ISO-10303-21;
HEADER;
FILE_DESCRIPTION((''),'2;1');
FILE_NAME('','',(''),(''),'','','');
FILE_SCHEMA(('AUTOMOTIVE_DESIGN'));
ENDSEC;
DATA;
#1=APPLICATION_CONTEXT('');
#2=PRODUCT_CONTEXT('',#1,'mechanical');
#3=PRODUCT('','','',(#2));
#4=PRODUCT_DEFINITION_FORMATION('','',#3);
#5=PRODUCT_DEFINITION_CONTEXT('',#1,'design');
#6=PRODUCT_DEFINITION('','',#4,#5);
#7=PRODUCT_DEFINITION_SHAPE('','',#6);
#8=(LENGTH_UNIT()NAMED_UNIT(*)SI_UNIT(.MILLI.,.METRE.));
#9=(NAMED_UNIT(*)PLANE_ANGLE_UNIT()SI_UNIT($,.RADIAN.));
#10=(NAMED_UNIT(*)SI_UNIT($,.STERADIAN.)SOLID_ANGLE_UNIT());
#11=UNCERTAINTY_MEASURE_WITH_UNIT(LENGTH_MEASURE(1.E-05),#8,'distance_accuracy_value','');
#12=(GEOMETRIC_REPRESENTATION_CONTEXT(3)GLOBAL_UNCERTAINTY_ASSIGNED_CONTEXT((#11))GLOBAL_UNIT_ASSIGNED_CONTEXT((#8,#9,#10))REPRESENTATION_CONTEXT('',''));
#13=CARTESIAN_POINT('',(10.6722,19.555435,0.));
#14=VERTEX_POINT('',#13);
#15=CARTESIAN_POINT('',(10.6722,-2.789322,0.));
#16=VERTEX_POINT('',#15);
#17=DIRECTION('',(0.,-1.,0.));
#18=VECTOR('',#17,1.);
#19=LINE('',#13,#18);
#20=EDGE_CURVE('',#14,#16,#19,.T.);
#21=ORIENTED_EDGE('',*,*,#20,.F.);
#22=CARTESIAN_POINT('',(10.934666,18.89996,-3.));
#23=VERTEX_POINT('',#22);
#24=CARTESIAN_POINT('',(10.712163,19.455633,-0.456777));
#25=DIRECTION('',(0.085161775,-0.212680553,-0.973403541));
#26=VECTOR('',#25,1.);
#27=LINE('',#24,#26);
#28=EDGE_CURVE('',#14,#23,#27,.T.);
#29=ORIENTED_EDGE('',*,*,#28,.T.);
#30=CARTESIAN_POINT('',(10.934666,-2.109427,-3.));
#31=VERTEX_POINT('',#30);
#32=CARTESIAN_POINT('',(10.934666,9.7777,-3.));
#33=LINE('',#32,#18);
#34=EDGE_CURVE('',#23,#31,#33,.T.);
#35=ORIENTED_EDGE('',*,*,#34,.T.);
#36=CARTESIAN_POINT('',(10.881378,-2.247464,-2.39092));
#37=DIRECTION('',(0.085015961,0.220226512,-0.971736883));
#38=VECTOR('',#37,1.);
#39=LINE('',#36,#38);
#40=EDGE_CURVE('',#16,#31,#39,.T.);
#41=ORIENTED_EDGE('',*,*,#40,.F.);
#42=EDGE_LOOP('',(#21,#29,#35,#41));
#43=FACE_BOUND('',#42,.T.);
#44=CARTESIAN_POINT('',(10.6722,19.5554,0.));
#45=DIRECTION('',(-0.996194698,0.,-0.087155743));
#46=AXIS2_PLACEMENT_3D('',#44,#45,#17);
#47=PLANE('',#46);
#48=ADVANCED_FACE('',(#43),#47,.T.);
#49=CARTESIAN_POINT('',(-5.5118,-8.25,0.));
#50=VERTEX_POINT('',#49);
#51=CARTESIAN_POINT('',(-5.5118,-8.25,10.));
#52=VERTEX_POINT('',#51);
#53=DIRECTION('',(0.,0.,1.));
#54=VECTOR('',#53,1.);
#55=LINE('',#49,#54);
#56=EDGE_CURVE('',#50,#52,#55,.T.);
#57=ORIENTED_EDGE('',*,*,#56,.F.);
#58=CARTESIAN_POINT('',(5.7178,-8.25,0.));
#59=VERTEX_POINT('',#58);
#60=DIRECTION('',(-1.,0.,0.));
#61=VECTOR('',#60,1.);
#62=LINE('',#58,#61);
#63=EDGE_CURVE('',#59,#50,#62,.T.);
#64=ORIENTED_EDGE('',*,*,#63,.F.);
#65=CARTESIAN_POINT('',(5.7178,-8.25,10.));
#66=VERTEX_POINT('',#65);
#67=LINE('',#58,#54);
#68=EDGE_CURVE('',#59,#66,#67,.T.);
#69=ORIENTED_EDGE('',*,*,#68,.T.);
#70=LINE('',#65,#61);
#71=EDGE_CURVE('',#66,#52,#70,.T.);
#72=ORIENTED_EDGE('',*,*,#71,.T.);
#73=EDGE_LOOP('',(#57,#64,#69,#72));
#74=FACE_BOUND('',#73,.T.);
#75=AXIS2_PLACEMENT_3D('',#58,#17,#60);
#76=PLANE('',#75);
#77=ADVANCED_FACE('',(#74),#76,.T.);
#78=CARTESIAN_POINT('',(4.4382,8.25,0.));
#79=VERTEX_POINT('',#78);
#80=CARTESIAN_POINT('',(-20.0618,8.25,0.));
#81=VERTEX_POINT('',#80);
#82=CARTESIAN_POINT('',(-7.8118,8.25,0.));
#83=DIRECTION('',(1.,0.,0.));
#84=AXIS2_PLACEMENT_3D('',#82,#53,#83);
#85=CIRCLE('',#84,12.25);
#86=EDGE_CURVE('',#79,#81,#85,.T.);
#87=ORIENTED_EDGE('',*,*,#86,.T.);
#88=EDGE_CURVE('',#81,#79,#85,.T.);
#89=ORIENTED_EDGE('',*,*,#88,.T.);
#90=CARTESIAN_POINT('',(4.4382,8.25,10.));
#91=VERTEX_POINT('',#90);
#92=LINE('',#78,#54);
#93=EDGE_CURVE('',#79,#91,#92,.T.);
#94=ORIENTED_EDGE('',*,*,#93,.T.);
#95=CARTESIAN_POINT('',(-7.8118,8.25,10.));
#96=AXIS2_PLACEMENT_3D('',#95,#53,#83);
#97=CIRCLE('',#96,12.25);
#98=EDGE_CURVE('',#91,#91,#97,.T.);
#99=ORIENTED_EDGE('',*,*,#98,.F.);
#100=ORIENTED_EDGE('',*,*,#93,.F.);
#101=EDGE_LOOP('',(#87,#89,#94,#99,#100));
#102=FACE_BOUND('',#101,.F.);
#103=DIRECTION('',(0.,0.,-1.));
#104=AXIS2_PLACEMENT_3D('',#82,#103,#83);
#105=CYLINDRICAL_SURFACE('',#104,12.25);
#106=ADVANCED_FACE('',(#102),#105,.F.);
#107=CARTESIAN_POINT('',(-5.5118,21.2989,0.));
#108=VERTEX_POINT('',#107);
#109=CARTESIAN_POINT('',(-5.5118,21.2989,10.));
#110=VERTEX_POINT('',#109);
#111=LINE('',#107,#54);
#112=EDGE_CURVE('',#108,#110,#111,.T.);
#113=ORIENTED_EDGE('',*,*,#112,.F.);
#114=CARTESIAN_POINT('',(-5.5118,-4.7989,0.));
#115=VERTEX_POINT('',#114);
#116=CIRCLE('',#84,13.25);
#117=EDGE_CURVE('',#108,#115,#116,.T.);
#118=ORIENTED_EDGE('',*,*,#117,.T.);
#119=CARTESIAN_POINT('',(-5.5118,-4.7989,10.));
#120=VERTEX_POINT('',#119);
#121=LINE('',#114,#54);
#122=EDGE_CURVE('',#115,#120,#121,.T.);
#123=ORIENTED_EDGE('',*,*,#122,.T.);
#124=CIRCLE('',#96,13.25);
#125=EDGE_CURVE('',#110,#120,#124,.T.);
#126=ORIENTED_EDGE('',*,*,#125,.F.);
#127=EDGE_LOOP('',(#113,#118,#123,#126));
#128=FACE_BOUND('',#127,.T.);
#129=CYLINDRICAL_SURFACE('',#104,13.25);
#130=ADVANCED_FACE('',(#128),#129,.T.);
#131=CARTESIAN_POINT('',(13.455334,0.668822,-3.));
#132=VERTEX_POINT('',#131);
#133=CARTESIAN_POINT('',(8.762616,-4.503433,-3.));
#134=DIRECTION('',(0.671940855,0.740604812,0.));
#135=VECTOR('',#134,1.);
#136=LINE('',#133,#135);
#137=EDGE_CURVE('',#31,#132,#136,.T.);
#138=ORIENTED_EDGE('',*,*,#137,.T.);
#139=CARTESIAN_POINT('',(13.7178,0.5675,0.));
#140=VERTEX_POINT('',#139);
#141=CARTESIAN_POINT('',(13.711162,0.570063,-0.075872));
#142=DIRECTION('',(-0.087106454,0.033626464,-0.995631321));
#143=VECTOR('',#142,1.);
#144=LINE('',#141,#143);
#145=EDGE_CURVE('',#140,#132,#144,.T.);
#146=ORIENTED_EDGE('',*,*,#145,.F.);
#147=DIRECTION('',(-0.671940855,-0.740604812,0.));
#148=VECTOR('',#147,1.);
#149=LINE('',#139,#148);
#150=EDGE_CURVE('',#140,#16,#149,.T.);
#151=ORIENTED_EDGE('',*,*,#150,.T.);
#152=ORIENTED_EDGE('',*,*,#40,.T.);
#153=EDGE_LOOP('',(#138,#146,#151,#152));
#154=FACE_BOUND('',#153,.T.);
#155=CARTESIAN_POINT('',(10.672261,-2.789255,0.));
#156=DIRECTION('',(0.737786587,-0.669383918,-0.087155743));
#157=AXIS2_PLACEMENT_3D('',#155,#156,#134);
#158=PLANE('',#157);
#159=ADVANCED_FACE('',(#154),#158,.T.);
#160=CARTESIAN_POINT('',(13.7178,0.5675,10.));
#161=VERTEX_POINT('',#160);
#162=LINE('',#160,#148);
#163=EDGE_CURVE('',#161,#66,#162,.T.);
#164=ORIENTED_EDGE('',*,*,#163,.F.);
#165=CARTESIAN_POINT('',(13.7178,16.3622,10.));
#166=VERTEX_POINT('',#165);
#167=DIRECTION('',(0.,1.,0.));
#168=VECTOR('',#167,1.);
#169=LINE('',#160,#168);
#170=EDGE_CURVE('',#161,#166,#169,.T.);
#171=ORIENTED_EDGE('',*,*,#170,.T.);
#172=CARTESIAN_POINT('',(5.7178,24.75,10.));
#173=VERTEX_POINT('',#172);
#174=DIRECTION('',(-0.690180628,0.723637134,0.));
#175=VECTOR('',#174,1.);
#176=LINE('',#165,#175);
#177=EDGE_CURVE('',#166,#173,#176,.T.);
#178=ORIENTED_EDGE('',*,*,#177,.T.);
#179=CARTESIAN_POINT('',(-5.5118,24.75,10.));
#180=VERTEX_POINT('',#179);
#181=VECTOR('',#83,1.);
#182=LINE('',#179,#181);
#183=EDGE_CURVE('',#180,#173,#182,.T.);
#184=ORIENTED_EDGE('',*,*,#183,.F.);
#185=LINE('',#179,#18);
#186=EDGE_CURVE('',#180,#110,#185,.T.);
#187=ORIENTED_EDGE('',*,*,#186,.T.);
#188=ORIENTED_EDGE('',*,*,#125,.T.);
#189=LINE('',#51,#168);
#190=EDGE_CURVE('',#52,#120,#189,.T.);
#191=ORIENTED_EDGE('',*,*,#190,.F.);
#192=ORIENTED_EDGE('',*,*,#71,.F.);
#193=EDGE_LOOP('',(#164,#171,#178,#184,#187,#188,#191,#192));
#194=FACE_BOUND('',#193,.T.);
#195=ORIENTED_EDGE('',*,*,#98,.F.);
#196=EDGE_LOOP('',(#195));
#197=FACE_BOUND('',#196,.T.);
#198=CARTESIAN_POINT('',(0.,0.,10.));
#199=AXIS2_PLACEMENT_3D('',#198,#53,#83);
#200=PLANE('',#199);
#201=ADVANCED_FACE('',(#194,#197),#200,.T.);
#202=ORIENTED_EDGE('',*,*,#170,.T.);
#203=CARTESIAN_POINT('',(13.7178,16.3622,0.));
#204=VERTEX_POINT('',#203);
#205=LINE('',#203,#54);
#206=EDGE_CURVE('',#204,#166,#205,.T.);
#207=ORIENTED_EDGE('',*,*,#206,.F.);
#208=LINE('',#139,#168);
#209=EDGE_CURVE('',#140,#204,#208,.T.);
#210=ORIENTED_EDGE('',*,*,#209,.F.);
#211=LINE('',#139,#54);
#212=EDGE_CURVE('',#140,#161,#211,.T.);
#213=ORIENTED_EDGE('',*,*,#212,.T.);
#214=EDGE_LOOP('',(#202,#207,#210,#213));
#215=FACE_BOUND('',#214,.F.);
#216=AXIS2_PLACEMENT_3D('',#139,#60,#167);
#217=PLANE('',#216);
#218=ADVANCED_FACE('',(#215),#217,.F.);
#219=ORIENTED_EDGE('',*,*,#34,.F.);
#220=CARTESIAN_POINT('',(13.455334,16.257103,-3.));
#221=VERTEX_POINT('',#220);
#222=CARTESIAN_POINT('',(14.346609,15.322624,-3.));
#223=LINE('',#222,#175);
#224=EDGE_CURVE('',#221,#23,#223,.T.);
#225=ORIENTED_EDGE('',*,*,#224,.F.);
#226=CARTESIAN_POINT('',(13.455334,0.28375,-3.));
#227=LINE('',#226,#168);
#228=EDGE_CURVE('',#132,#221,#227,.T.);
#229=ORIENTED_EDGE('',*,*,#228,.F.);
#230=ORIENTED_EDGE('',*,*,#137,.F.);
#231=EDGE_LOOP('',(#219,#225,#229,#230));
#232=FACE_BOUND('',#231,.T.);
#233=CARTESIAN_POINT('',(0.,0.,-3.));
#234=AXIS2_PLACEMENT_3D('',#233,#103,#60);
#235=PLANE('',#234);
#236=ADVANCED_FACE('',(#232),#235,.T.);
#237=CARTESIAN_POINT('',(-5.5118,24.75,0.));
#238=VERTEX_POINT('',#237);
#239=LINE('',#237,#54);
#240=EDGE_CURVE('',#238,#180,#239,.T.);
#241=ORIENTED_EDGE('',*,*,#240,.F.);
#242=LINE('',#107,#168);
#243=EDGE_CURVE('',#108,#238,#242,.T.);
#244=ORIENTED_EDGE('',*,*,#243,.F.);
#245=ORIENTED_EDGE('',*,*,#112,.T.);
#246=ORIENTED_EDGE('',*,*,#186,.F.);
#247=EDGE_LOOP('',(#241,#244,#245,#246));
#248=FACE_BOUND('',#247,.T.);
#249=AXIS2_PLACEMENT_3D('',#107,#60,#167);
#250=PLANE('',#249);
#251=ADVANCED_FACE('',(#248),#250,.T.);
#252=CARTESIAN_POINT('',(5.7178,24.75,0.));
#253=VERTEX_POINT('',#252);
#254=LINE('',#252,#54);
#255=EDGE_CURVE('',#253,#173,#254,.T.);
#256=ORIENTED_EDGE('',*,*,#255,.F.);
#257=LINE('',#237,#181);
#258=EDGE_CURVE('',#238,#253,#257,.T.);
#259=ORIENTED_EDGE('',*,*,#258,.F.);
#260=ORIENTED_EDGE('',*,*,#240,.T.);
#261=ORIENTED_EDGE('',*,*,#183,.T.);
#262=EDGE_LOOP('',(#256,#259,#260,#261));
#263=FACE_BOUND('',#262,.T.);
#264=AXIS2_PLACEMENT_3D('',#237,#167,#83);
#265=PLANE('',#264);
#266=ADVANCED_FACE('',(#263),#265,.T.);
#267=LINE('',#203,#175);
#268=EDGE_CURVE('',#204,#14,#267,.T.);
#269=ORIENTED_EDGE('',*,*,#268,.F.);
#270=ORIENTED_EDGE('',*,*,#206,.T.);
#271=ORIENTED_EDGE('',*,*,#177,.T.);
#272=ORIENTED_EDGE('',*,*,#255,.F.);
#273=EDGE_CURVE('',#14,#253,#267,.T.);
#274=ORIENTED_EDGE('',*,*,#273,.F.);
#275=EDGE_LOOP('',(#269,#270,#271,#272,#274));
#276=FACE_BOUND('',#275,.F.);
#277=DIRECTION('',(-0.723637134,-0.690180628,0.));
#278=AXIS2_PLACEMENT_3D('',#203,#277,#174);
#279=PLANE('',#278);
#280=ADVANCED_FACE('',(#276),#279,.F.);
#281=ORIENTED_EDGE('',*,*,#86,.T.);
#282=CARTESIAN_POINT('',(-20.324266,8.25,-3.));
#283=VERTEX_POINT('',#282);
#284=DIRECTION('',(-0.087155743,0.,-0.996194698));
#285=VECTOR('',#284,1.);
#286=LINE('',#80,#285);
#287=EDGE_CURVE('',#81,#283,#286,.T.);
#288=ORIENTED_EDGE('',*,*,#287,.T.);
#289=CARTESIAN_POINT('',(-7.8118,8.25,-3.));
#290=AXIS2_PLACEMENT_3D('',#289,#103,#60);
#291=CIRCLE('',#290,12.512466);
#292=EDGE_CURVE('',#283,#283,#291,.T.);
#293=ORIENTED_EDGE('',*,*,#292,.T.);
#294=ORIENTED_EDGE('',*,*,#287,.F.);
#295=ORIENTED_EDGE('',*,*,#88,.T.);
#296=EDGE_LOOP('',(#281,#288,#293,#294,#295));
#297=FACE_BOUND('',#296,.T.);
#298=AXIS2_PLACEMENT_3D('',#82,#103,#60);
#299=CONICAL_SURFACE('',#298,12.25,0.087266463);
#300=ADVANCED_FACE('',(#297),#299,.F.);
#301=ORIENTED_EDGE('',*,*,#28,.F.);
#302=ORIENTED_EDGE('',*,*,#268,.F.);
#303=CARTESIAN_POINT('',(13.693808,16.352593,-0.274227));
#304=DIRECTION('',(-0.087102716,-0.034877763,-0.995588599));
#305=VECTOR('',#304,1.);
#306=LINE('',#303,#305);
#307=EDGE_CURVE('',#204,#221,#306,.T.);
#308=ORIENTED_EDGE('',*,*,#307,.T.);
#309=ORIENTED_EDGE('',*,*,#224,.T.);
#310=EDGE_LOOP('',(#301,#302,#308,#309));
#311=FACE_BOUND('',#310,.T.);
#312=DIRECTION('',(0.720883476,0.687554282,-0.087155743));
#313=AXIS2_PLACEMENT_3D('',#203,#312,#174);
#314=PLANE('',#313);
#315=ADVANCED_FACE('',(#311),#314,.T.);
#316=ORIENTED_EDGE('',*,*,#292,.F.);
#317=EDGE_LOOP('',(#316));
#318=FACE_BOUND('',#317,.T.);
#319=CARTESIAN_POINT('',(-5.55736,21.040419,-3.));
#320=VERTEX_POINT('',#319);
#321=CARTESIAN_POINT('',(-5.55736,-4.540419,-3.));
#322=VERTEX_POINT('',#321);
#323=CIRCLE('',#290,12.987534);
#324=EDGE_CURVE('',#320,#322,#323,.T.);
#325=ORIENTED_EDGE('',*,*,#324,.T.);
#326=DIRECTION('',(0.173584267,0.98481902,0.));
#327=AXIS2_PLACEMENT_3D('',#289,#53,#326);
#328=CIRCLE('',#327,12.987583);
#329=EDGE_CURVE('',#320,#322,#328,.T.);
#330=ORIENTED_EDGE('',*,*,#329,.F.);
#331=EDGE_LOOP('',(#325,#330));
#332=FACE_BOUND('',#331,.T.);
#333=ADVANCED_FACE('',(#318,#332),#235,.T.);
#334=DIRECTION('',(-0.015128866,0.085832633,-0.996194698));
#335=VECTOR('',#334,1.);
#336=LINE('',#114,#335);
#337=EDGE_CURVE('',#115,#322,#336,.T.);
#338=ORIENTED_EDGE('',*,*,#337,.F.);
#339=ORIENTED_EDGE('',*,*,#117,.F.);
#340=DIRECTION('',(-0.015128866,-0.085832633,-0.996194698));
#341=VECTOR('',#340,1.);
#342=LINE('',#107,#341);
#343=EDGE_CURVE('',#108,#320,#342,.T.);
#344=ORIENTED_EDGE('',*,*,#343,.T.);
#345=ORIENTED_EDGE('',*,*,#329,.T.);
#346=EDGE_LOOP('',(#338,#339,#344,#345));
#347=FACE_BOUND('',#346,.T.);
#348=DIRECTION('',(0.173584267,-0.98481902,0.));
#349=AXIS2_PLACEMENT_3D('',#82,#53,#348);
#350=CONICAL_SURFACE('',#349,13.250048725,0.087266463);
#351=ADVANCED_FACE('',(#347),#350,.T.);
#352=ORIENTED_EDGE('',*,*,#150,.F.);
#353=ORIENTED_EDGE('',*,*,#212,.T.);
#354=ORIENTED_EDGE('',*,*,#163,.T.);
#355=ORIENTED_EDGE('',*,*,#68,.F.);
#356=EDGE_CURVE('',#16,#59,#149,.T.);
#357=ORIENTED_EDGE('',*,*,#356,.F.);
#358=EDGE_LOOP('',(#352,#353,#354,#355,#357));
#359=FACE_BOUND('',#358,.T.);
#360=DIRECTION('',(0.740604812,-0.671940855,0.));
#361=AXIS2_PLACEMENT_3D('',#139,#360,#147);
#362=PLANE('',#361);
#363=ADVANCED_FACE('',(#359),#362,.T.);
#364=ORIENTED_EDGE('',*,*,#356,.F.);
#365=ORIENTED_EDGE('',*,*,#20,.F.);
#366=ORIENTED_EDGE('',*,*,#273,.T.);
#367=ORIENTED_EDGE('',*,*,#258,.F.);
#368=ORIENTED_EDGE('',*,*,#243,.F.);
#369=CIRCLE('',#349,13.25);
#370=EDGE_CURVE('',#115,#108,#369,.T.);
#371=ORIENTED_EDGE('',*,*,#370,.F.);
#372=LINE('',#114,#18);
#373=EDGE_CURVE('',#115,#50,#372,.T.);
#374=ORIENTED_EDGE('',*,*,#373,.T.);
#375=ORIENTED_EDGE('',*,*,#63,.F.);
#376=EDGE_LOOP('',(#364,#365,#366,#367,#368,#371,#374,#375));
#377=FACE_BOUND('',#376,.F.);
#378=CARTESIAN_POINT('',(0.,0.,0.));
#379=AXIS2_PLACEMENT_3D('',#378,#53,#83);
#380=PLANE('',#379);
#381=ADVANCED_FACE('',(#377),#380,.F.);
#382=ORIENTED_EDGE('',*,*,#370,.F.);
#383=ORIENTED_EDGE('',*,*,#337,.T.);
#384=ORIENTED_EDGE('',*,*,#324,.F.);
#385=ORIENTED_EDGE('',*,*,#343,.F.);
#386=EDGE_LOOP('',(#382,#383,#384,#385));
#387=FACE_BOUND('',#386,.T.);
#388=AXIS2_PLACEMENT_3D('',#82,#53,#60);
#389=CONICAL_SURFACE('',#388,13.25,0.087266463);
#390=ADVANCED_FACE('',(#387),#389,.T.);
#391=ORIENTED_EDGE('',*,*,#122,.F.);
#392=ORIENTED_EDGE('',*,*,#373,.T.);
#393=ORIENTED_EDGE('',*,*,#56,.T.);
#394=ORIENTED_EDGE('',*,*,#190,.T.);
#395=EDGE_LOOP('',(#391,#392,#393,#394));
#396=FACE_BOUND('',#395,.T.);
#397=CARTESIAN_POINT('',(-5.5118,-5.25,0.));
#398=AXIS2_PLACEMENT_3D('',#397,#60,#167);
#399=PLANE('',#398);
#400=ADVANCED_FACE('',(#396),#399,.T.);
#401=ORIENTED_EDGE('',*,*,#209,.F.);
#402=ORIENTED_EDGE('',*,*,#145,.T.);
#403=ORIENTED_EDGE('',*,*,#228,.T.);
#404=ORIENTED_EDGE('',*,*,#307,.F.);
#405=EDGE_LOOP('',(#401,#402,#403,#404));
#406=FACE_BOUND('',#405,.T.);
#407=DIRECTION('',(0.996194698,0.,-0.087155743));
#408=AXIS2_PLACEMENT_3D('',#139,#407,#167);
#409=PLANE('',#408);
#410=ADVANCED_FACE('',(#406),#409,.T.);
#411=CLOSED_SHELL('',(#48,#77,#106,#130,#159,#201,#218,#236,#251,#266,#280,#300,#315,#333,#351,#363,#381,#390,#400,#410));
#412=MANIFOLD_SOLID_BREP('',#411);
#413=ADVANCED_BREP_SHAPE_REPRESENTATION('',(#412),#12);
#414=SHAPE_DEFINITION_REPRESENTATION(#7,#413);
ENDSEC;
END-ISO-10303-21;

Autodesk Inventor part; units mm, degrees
ref_plane "YZ Plane" through (0, 0, 0) normal (1, 0, 0) x (0, 1, 0)
ref_plane "XZ Plane" through (0, 0, 0) normal (0, 1, 0) x (-1, 0, 0)
ref_plane "XY Plane" through (0, 0, 0) normal (0, 0, 1) x (1, 0, 0)
sketch "Sketch1" plane through (0, 0, 0) normal (0, 0, 1) x (1, 0, 0)
  arc A0 (-5.5118, -5.25) -> (-5.5118, 21.75) centre (-8.0118, 8.25) ccw projected
  circle A1 centre (-7.8118, 8.25) radius 10 construction
  circle A2 centre (-7.8118, 8.25) radius 12.15 construction
  line L0 (-5.5118, -8.25) -> (-5.5118, -5.25) construction
  line L1 (7.4882, -8.25) -> (-5.5118, -8.25) construction
  line L2 (11.0118, -4.7265) -> (7.4882, -8.25) construction
  line L3 (11.0118, -4.7265) -> (11.0118, 21.2265) construction
  line L4 (11.0118, 21.2265) -> (7.4882, 24.75) construction
  line L5 (7.4882, 24.75) -> (-5.5118, 24.75) construction
  line L6 (-5.5118, 24.75) -> (-5.5118, 21.75) construction
  arc A3 (-5.5118, -5.25) -> (-5.5118, 21.75) centre (-8.0118, 8.25) ccw construction
  circle A4 centre (-7.8118, 8.25) radius 12.25
  circle A5 centre (-7.8118, 8.25) radius 13.25
  line L7 (-5.5118, 21.2989) -> (-5.5118, 24.75)
  line L8 (-5.5118, 24.75) -> (5.7178, 24.75)
  line L9 (5.7178, 24.75) -> (5.7178, -8.25)
  line L10 (5.7178, 24.75) -> (38.7178, 24.75) construction
  line L11 (5.7178, -8.25) -> (-5.5118, -8.25)
  line L12 (-5.5118, -8.25) -> (-5.5118, -4.7989)
  line L13 (13.7178, 16.3622) -> (5.7178, 16.3622)
  line L14 (5.7178, 16.3622) -> (5.7178, 0.5675)
  line L15 (5.7178, 0.5675) -> (13.7178, 0.5675)
  line L16 (13.7178, 0.5675) -> (13.7178, 16.3622)
  line L17 (13.7178, 16.3622) -> (5.7178, 0.5675) construction
  line L18 (5.7178, 16.3622) -> (13.7178, 0.5675) construction
  line L19 (13.7178, 0.5675) -> (5.7178, -8.25)
  line L20 (13.7178, 16.3622) -> (5.7178, 24.75)
  point P0 (0, 0)
  point P1 (9.7178, 8.4649)
  dimension "d0" = 24.5
  dimension "d1" = 26.5
  dimension "d2" = 90
  dimension "d7" = 8
extrude "Extrusion1" add sketch "Sketch1" along normal blind 10
sketch "Sketch2" plane through (0, 0, 0) normal (0, 0, -1) x (-1, 0, 0)
  line L0 (-5.7178, -8.25) -> (-5.7178, 24.75) projected
  circle A0 centre (7.8118, 8.25) radius 12.25 projected
  line L1 (5.5118, -8.25) -> (-5.7178, -8.25) projected
  line L2 (5.5118, -4.7989) -> (5.5118, -8.25) projected
  arc A1 (5.5118, -4.7989) -> (5.5118, 21.2989) centre (7.8118, 8.25) ccw projected
  line L3 (5.5118, 24.75) -> (5.5118, 21.2989) projected
  line L4 (-5.7178, 24.75) -> (5.5118, 24.75) projected
  circle A2 centre (7.8118, 8.25) radius 13.25
  line L5 (-13.7178, 16.3622) -> (-5.7178, 24.75) projected
  line L6 (-13.7178, 0.5675) -> (-13.7178, 16.3622) projected
  line L7 (-5.7178, -8.25) -> (-13.7178, 0.5675) projected
  line L8 (-13.7178, 16.3622) -> (-5.7178, 24.75) projected
  line L9 (-13.7178, 0.5675) -> (-13.7178, 16.3622) projected
  line L10 (-5.7178, -8.25) -> (-13.7178, 0.5675) projected
  line L11 (-11.0118, 21.2265) -> (-11.0118, -4.7265) construction
  line L12 (-10.6722, 19.5554) -> (-10.6722, -2.7892)
  line L13 (-5.7178, -8.25) -> (-13.7178, 0.5675) projected
  line L14 (-10.6722, 19.5554) -> (11.6724, 19.5554) construction
  point P0 (0, 0)
  dimension "d8" = 90
extrude "Extrusion2" add sketch "Sketch2" along normal blind 3 draft -5 contours L7 L6 L5 L12 | A2 A1
properties part number "cellSTORM_inverted_objectiveadapter"
